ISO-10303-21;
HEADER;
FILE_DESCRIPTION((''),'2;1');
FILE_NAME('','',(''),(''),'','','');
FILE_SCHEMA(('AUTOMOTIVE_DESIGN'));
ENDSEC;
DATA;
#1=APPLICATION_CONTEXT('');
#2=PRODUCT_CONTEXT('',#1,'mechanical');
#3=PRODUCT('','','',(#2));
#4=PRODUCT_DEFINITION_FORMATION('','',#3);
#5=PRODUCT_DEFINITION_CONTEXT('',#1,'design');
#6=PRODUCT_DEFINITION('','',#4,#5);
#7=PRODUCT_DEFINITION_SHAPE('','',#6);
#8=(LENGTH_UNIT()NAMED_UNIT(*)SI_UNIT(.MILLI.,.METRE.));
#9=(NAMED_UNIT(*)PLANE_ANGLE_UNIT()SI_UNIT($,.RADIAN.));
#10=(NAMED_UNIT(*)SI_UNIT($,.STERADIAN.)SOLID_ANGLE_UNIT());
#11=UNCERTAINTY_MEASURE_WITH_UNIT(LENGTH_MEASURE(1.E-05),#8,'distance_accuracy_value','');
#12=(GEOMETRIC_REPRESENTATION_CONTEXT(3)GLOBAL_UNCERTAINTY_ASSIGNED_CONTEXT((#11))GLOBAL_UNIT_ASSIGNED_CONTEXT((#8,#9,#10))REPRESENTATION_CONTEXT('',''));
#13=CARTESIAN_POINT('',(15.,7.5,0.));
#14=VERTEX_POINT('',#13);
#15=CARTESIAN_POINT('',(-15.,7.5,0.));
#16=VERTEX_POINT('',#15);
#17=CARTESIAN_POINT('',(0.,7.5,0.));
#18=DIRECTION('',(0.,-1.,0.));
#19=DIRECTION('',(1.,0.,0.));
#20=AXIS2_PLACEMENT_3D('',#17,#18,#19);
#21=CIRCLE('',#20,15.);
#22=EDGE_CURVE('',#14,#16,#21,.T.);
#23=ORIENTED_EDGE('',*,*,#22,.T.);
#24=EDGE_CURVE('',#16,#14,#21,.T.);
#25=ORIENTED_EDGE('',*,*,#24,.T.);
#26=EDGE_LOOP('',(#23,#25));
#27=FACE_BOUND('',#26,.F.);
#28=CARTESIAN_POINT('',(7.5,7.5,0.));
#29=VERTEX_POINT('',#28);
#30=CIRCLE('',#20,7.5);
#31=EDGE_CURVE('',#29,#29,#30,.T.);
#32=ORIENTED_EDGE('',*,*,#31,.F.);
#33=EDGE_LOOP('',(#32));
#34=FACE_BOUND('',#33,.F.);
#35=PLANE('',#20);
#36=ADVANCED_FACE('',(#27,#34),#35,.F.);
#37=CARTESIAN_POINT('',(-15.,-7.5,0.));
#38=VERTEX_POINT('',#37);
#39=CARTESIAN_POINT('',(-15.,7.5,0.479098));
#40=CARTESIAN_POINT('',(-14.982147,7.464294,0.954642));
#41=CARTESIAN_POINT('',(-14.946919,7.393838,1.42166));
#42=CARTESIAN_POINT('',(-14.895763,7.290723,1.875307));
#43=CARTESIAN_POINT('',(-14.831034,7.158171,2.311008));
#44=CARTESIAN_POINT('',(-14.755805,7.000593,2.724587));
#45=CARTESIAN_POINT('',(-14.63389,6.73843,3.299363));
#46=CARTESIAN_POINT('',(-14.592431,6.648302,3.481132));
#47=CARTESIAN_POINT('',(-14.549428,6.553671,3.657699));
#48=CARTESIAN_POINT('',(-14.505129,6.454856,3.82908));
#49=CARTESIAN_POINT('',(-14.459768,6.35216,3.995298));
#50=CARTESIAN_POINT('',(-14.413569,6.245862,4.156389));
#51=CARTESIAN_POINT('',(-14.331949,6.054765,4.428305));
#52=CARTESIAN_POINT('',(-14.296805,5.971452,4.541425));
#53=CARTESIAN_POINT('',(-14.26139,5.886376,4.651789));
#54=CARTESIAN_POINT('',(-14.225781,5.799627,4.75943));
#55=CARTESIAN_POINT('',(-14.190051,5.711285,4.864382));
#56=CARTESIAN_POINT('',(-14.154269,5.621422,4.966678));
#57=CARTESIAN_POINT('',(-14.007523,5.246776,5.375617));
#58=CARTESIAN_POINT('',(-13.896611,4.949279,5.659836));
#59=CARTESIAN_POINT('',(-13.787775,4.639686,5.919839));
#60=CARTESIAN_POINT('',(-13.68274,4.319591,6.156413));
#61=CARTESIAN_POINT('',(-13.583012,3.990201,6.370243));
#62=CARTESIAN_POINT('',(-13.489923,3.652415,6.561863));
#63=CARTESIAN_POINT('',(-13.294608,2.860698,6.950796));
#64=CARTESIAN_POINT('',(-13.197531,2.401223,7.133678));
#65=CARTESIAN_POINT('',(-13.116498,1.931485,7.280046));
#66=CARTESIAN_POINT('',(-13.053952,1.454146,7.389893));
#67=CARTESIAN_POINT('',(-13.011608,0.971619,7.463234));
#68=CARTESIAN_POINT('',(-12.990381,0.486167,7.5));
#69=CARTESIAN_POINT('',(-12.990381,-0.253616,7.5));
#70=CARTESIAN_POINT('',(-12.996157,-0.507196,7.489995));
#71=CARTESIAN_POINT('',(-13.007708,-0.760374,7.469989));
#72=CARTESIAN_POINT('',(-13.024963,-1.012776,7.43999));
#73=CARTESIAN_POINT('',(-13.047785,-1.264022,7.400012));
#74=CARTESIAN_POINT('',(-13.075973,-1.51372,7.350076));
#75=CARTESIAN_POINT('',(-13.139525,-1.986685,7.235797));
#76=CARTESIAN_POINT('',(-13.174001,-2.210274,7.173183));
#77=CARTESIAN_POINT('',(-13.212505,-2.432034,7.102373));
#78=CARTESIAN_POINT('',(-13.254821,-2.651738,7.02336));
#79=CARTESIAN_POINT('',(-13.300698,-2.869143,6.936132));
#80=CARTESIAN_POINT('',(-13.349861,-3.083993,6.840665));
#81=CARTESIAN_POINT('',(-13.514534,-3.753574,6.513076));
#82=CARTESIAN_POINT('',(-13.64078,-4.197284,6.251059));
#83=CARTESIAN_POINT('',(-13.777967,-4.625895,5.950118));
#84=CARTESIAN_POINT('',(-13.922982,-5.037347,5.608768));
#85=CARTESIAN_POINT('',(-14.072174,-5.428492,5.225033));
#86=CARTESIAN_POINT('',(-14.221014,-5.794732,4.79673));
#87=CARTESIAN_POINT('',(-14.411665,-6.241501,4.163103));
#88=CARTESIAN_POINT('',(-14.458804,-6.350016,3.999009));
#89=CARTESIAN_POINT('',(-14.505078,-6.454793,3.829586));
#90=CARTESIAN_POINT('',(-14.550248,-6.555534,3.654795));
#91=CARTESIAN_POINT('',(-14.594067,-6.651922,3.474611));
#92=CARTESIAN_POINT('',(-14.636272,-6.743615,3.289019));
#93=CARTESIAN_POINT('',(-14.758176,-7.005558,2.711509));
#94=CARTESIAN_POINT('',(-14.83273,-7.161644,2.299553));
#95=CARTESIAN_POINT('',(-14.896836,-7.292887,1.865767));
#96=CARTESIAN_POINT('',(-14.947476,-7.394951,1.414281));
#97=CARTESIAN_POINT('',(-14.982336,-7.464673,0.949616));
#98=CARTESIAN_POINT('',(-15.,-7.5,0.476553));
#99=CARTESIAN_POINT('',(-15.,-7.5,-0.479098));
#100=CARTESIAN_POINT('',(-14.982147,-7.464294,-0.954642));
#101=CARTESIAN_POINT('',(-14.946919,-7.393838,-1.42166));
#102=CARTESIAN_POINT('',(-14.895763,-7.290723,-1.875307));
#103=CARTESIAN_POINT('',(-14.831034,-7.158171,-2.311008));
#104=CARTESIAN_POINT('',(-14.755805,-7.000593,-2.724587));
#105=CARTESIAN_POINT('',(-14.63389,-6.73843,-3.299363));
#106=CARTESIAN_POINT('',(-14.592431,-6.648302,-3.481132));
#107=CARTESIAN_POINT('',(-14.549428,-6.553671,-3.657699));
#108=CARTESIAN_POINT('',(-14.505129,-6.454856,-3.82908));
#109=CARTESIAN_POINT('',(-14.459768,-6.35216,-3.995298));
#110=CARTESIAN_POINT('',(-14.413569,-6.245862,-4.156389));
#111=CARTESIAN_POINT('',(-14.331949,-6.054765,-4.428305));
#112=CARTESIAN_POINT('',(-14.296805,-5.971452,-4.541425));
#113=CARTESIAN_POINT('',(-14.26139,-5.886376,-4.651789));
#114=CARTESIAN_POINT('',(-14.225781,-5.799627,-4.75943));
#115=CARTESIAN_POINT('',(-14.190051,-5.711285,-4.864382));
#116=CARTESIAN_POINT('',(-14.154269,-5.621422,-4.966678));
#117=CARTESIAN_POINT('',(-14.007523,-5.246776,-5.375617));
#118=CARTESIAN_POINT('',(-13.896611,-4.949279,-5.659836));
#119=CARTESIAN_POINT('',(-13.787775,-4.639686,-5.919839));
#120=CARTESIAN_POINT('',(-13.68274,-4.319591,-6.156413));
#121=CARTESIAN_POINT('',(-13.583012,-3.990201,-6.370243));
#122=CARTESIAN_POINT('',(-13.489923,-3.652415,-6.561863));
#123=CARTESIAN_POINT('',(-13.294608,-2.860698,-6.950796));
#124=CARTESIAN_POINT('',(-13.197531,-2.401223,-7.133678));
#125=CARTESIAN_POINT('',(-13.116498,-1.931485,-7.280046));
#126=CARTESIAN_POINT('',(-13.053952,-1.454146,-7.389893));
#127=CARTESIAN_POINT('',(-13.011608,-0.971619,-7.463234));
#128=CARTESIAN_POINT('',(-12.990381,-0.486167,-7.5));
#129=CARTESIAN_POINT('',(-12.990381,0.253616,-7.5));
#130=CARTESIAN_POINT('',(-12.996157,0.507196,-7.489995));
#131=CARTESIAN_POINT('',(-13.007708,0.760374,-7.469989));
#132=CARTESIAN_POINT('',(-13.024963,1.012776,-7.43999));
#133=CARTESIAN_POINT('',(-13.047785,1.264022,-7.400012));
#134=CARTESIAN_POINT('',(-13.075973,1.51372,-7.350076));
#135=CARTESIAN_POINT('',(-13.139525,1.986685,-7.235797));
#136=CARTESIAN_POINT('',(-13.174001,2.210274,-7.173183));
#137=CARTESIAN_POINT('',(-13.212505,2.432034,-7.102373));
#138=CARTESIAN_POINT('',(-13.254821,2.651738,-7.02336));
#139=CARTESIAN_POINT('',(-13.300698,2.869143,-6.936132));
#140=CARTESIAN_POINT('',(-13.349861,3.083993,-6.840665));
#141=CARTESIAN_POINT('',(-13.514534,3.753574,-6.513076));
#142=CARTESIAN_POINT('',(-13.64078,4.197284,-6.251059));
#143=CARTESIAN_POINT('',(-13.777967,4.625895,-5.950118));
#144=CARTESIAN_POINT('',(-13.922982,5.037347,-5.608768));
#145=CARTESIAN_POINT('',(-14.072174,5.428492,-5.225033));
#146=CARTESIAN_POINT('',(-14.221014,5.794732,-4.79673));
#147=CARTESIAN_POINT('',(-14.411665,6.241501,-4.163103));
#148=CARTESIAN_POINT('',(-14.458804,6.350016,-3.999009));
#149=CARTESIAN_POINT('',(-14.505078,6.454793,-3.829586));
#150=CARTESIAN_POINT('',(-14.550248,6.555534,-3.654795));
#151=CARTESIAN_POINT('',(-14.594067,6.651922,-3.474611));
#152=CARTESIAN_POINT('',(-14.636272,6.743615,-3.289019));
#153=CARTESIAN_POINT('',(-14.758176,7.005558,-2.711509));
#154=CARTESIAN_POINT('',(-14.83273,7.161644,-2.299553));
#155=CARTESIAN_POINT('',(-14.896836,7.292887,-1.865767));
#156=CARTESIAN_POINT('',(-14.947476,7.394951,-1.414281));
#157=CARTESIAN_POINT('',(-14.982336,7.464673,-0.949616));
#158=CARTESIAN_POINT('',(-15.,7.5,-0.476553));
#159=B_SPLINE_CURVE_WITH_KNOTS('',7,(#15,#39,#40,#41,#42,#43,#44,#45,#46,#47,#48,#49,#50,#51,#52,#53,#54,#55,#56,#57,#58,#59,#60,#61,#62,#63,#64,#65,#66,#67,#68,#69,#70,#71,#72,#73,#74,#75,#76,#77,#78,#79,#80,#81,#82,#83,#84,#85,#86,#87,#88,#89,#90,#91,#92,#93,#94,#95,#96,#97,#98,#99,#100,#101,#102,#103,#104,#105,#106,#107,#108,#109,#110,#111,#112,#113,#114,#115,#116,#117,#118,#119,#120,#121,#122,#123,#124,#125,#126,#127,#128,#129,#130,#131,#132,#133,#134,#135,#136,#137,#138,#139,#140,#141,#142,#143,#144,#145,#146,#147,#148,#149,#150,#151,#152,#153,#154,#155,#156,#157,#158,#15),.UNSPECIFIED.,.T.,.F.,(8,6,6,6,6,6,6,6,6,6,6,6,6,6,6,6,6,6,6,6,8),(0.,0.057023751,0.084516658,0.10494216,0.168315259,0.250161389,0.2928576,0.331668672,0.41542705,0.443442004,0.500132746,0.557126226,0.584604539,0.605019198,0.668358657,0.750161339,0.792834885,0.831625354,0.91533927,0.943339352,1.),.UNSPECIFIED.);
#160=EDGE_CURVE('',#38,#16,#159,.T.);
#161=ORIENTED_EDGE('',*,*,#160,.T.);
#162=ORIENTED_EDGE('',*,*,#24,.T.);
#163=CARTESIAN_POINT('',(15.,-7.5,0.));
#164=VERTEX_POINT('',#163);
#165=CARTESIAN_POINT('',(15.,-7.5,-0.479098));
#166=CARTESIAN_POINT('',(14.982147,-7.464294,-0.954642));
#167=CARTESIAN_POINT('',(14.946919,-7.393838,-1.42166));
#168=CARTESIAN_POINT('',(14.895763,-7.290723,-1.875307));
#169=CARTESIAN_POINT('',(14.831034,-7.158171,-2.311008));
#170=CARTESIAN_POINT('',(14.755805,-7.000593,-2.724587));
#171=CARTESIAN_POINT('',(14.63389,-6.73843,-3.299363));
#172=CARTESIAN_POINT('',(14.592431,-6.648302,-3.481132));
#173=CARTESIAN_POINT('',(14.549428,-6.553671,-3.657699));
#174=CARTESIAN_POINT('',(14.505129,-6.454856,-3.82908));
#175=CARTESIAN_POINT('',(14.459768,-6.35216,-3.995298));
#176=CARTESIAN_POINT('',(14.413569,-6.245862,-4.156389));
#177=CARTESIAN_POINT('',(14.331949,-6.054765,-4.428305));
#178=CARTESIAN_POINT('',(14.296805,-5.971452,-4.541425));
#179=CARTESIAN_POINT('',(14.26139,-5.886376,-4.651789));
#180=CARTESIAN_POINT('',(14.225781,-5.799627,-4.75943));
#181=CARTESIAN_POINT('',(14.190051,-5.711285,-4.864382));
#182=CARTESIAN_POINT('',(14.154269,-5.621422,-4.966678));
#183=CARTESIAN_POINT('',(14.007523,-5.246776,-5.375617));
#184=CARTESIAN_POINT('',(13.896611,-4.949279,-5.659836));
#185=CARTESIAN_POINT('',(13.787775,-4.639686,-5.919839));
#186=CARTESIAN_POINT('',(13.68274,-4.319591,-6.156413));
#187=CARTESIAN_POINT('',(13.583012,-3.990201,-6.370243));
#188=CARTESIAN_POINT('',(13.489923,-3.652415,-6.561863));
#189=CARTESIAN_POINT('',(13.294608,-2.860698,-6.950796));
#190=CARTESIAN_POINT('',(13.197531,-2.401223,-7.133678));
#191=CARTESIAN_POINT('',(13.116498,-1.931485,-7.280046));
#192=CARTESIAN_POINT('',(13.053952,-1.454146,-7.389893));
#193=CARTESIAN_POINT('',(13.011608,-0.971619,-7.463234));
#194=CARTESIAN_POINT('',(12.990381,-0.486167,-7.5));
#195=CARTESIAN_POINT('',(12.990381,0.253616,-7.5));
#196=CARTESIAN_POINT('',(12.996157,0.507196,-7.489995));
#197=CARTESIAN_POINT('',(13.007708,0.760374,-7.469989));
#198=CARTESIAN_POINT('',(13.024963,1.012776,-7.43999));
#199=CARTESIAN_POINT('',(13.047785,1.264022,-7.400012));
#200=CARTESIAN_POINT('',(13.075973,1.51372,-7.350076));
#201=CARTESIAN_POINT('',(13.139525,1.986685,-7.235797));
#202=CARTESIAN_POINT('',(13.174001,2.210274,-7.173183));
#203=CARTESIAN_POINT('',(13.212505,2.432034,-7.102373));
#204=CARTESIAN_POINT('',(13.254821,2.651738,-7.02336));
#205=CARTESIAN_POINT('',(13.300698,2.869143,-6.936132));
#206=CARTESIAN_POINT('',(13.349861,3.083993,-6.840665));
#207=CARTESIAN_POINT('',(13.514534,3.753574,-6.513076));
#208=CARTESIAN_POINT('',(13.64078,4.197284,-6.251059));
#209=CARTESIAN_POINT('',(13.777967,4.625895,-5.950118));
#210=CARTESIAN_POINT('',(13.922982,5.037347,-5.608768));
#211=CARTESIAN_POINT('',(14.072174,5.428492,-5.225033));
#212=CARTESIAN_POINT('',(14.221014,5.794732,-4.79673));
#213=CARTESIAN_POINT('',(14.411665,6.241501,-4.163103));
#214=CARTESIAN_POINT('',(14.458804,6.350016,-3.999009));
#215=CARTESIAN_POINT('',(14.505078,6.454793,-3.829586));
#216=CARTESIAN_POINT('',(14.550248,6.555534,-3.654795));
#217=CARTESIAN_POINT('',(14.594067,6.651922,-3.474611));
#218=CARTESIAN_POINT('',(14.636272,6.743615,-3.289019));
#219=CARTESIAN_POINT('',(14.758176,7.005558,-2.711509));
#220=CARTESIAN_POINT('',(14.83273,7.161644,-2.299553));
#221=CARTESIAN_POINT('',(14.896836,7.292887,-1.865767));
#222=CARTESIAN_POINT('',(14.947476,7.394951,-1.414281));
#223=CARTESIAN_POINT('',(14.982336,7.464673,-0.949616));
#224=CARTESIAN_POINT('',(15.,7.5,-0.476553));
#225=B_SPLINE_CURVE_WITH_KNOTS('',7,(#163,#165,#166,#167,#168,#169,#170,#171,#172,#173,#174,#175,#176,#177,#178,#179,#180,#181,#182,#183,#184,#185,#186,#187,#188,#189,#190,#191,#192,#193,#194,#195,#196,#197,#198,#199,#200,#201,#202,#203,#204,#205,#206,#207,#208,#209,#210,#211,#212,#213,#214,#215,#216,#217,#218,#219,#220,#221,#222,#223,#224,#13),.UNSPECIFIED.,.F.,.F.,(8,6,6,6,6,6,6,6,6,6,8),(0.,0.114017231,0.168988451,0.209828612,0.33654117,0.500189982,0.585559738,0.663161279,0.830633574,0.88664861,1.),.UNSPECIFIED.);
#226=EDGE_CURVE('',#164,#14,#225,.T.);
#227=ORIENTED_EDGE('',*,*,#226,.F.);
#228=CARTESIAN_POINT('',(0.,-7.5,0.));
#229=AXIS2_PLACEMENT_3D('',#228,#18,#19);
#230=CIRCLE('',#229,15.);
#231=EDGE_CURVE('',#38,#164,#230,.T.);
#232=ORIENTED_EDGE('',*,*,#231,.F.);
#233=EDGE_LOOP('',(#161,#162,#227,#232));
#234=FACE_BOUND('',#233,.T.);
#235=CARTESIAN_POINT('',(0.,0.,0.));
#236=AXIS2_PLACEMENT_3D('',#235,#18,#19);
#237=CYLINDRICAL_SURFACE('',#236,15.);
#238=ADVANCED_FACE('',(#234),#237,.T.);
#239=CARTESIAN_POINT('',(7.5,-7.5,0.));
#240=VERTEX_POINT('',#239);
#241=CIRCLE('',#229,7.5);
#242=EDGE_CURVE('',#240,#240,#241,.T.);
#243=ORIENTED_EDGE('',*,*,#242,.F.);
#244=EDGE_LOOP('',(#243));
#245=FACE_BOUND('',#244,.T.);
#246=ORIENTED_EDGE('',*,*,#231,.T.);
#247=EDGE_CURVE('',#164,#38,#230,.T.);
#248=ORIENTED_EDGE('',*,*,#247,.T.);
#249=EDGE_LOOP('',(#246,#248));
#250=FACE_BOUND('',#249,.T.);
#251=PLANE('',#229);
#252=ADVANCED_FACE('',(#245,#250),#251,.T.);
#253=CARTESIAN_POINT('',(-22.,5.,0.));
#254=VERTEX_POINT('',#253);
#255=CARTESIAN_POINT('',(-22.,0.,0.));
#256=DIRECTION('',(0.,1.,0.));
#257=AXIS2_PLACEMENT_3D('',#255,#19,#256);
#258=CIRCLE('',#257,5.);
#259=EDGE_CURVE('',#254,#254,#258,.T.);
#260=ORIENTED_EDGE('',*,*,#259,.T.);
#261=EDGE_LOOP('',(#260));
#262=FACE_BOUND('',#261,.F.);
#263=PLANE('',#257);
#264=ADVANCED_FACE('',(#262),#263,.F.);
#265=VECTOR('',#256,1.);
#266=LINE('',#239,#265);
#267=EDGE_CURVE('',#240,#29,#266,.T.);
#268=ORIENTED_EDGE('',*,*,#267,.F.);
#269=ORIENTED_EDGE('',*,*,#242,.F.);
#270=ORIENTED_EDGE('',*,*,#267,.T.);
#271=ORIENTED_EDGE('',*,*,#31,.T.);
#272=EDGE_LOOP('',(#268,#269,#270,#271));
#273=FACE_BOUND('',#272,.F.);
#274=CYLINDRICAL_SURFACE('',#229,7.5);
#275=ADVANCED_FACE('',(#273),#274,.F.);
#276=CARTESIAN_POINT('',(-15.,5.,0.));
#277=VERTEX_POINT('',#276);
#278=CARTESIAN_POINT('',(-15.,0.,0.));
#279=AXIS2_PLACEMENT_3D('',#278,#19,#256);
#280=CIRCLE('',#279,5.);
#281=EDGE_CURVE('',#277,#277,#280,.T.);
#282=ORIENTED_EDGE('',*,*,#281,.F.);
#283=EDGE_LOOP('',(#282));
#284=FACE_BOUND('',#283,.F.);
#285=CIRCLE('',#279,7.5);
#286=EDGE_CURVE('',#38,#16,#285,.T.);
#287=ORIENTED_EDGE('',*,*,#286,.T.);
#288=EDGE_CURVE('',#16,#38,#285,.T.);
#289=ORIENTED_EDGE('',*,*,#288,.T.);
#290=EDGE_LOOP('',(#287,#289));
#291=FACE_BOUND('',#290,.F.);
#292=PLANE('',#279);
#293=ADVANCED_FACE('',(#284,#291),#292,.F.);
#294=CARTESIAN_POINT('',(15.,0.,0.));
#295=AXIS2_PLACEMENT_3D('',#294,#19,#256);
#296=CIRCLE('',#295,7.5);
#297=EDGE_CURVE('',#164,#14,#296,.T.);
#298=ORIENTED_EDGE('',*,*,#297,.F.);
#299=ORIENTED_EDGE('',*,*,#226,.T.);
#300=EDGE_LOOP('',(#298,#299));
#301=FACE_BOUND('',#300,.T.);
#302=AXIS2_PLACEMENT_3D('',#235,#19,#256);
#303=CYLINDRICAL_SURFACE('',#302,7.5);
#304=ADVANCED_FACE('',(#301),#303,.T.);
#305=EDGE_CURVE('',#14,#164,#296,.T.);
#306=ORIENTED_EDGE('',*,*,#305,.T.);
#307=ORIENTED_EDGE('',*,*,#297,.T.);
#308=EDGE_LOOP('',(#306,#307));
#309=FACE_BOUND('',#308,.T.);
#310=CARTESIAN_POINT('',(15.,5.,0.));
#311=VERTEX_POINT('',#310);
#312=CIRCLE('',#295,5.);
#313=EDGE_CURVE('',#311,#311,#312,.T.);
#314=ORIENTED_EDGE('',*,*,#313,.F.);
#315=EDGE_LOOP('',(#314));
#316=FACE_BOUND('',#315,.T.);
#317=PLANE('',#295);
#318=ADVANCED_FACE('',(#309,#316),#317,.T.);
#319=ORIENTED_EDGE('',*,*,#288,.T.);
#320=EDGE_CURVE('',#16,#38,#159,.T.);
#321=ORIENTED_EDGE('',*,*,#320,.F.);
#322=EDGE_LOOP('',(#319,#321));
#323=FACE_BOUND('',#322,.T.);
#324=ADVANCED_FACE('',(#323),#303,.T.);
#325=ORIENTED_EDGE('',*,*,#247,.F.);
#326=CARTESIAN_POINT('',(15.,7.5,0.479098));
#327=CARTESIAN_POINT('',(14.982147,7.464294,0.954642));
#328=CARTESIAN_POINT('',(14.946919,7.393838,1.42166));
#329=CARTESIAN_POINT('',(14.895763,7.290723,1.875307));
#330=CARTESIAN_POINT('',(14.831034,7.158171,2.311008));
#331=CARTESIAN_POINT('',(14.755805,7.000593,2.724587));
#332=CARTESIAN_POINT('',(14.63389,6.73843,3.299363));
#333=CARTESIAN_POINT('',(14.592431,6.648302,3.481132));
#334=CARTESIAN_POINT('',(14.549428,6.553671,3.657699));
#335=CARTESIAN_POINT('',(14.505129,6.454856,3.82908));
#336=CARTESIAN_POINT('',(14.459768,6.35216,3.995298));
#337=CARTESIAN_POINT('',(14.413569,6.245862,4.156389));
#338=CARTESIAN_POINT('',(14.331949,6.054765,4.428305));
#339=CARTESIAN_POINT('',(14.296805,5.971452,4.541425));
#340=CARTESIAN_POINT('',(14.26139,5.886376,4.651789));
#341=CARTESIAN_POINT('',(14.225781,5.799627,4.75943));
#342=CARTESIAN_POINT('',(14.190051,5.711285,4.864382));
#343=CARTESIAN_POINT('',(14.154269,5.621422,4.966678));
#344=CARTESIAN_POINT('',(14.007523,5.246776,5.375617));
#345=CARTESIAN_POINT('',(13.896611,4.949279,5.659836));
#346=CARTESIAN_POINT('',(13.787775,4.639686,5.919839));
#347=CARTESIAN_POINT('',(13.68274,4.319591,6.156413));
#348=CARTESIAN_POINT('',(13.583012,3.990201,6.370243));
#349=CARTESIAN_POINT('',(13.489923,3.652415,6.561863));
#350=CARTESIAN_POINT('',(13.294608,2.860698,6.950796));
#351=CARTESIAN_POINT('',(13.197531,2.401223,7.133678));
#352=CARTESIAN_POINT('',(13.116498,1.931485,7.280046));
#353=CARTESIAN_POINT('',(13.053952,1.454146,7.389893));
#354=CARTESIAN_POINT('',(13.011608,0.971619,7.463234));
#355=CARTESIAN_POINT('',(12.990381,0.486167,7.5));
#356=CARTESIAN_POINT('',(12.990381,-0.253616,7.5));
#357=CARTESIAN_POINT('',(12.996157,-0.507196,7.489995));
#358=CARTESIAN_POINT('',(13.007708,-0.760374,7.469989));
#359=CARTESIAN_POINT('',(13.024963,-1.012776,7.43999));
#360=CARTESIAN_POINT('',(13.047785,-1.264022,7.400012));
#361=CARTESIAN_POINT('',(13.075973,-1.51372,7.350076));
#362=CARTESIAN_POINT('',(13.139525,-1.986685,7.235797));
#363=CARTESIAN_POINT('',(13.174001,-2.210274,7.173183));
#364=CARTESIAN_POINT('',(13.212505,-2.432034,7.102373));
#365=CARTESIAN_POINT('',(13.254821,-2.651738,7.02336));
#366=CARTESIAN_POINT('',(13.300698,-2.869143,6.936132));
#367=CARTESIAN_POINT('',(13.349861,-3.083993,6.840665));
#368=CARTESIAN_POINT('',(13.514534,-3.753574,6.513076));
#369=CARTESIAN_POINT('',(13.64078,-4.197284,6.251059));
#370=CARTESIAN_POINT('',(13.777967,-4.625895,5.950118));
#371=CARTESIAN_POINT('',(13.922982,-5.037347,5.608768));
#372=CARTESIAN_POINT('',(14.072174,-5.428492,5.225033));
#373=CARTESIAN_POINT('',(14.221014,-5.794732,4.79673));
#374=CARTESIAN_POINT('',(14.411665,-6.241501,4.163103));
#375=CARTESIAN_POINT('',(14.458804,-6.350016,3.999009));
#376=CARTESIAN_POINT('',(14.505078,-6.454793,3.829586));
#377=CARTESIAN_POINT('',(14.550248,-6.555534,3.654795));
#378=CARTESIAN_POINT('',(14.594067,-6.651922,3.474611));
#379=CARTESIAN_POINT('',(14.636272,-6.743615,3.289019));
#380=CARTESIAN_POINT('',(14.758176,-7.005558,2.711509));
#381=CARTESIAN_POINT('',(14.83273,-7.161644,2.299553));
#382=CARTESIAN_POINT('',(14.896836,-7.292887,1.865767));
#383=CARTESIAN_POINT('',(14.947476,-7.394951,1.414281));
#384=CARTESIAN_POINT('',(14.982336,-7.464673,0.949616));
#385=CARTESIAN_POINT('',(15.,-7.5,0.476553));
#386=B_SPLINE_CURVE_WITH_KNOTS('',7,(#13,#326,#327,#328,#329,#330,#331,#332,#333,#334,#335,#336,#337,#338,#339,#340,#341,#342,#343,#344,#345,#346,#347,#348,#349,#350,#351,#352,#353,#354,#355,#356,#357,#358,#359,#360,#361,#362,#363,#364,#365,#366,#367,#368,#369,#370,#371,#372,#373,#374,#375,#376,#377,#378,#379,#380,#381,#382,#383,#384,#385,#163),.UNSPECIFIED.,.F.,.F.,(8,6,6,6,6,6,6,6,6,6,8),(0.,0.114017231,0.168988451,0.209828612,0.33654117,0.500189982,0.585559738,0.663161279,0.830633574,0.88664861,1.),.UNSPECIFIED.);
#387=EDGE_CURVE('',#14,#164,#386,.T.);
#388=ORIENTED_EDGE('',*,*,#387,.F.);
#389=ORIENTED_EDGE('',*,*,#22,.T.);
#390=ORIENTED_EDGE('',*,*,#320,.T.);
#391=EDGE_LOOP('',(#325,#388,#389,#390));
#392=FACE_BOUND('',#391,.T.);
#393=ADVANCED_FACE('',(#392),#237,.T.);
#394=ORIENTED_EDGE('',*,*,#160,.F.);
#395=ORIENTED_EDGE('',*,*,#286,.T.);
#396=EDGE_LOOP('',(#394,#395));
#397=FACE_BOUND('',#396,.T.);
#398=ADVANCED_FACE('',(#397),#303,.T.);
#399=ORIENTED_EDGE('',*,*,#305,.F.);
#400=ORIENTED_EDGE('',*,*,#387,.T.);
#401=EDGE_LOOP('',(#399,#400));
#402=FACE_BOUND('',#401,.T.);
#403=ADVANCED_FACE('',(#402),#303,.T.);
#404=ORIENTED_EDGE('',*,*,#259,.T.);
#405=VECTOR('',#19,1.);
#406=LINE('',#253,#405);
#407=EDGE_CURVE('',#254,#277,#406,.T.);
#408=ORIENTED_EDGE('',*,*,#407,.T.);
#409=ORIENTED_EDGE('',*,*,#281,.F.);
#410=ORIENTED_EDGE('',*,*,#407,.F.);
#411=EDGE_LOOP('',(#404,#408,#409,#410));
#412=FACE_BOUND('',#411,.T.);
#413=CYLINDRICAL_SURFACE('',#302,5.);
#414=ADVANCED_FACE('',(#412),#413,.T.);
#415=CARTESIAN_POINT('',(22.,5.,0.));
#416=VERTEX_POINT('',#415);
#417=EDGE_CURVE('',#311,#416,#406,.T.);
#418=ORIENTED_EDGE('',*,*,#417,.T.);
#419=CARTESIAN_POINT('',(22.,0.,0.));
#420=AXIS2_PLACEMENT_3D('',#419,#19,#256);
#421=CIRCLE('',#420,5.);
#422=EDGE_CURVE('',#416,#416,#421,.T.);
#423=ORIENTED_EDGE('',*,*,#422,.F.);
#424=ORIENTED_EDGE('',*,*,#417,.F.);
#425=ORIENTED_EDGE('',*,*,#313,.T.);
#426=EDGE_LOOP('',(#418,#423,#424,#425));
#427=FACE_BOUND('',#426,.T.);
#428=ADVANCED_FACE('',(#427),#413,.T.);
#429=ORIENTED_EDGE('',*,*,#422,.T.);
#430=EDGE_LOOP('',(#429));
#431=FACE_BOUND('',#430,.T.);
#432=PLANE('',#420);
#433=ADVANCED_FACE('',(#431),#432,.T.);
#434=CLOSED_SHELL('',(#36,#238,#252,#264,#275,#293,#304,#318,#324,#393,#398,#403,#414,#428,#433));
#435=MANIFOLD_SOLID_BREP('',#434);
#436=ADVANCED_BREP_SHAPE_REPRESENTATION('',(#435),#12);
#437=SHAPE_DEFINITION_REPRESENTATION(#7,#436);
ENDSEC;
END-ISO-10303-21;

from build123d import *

# Parameters (mm, degrees)
F0_R     = 15
F1_DEPTH = 7.5
F2_R     = 7.5
F3_DEPTH = 15
F4_R     = 5
F5_DEPTH = 22
F6_R     = 7.5
F7_DEPTH = 15.0010001


with BuildPart() as f1:
    # F0 (on Front) → F1 (new body, symmetric)
    with BuildSketch(Plane.XZ):
        Circle(F0_R)
    extrude(amount=F1_DEPTH, both=True)

    # F2 (on Right) → F3 (join, symmetric)
    with BuildSketch(Plane.YZ):
        Circle(F2_R)
    extrude(amount=F3_DEPTH, both=True)

    # F4 (on Right) → F5 (join, symmetric)
    with BuildSketch(Plane.YZ):
        Circle(F4_R)
    extrude(amount=F5_DEPTH, both=True)

    # F6 (on face) → F7 (cut, through all)
    with BuildSketch(Plane.XZ.offset(7.5)):
        Circle(F6_R)
    extrude(amount=-F7_DEPTH, mode=Mode.SUBTRACT)


solid = f1.part
